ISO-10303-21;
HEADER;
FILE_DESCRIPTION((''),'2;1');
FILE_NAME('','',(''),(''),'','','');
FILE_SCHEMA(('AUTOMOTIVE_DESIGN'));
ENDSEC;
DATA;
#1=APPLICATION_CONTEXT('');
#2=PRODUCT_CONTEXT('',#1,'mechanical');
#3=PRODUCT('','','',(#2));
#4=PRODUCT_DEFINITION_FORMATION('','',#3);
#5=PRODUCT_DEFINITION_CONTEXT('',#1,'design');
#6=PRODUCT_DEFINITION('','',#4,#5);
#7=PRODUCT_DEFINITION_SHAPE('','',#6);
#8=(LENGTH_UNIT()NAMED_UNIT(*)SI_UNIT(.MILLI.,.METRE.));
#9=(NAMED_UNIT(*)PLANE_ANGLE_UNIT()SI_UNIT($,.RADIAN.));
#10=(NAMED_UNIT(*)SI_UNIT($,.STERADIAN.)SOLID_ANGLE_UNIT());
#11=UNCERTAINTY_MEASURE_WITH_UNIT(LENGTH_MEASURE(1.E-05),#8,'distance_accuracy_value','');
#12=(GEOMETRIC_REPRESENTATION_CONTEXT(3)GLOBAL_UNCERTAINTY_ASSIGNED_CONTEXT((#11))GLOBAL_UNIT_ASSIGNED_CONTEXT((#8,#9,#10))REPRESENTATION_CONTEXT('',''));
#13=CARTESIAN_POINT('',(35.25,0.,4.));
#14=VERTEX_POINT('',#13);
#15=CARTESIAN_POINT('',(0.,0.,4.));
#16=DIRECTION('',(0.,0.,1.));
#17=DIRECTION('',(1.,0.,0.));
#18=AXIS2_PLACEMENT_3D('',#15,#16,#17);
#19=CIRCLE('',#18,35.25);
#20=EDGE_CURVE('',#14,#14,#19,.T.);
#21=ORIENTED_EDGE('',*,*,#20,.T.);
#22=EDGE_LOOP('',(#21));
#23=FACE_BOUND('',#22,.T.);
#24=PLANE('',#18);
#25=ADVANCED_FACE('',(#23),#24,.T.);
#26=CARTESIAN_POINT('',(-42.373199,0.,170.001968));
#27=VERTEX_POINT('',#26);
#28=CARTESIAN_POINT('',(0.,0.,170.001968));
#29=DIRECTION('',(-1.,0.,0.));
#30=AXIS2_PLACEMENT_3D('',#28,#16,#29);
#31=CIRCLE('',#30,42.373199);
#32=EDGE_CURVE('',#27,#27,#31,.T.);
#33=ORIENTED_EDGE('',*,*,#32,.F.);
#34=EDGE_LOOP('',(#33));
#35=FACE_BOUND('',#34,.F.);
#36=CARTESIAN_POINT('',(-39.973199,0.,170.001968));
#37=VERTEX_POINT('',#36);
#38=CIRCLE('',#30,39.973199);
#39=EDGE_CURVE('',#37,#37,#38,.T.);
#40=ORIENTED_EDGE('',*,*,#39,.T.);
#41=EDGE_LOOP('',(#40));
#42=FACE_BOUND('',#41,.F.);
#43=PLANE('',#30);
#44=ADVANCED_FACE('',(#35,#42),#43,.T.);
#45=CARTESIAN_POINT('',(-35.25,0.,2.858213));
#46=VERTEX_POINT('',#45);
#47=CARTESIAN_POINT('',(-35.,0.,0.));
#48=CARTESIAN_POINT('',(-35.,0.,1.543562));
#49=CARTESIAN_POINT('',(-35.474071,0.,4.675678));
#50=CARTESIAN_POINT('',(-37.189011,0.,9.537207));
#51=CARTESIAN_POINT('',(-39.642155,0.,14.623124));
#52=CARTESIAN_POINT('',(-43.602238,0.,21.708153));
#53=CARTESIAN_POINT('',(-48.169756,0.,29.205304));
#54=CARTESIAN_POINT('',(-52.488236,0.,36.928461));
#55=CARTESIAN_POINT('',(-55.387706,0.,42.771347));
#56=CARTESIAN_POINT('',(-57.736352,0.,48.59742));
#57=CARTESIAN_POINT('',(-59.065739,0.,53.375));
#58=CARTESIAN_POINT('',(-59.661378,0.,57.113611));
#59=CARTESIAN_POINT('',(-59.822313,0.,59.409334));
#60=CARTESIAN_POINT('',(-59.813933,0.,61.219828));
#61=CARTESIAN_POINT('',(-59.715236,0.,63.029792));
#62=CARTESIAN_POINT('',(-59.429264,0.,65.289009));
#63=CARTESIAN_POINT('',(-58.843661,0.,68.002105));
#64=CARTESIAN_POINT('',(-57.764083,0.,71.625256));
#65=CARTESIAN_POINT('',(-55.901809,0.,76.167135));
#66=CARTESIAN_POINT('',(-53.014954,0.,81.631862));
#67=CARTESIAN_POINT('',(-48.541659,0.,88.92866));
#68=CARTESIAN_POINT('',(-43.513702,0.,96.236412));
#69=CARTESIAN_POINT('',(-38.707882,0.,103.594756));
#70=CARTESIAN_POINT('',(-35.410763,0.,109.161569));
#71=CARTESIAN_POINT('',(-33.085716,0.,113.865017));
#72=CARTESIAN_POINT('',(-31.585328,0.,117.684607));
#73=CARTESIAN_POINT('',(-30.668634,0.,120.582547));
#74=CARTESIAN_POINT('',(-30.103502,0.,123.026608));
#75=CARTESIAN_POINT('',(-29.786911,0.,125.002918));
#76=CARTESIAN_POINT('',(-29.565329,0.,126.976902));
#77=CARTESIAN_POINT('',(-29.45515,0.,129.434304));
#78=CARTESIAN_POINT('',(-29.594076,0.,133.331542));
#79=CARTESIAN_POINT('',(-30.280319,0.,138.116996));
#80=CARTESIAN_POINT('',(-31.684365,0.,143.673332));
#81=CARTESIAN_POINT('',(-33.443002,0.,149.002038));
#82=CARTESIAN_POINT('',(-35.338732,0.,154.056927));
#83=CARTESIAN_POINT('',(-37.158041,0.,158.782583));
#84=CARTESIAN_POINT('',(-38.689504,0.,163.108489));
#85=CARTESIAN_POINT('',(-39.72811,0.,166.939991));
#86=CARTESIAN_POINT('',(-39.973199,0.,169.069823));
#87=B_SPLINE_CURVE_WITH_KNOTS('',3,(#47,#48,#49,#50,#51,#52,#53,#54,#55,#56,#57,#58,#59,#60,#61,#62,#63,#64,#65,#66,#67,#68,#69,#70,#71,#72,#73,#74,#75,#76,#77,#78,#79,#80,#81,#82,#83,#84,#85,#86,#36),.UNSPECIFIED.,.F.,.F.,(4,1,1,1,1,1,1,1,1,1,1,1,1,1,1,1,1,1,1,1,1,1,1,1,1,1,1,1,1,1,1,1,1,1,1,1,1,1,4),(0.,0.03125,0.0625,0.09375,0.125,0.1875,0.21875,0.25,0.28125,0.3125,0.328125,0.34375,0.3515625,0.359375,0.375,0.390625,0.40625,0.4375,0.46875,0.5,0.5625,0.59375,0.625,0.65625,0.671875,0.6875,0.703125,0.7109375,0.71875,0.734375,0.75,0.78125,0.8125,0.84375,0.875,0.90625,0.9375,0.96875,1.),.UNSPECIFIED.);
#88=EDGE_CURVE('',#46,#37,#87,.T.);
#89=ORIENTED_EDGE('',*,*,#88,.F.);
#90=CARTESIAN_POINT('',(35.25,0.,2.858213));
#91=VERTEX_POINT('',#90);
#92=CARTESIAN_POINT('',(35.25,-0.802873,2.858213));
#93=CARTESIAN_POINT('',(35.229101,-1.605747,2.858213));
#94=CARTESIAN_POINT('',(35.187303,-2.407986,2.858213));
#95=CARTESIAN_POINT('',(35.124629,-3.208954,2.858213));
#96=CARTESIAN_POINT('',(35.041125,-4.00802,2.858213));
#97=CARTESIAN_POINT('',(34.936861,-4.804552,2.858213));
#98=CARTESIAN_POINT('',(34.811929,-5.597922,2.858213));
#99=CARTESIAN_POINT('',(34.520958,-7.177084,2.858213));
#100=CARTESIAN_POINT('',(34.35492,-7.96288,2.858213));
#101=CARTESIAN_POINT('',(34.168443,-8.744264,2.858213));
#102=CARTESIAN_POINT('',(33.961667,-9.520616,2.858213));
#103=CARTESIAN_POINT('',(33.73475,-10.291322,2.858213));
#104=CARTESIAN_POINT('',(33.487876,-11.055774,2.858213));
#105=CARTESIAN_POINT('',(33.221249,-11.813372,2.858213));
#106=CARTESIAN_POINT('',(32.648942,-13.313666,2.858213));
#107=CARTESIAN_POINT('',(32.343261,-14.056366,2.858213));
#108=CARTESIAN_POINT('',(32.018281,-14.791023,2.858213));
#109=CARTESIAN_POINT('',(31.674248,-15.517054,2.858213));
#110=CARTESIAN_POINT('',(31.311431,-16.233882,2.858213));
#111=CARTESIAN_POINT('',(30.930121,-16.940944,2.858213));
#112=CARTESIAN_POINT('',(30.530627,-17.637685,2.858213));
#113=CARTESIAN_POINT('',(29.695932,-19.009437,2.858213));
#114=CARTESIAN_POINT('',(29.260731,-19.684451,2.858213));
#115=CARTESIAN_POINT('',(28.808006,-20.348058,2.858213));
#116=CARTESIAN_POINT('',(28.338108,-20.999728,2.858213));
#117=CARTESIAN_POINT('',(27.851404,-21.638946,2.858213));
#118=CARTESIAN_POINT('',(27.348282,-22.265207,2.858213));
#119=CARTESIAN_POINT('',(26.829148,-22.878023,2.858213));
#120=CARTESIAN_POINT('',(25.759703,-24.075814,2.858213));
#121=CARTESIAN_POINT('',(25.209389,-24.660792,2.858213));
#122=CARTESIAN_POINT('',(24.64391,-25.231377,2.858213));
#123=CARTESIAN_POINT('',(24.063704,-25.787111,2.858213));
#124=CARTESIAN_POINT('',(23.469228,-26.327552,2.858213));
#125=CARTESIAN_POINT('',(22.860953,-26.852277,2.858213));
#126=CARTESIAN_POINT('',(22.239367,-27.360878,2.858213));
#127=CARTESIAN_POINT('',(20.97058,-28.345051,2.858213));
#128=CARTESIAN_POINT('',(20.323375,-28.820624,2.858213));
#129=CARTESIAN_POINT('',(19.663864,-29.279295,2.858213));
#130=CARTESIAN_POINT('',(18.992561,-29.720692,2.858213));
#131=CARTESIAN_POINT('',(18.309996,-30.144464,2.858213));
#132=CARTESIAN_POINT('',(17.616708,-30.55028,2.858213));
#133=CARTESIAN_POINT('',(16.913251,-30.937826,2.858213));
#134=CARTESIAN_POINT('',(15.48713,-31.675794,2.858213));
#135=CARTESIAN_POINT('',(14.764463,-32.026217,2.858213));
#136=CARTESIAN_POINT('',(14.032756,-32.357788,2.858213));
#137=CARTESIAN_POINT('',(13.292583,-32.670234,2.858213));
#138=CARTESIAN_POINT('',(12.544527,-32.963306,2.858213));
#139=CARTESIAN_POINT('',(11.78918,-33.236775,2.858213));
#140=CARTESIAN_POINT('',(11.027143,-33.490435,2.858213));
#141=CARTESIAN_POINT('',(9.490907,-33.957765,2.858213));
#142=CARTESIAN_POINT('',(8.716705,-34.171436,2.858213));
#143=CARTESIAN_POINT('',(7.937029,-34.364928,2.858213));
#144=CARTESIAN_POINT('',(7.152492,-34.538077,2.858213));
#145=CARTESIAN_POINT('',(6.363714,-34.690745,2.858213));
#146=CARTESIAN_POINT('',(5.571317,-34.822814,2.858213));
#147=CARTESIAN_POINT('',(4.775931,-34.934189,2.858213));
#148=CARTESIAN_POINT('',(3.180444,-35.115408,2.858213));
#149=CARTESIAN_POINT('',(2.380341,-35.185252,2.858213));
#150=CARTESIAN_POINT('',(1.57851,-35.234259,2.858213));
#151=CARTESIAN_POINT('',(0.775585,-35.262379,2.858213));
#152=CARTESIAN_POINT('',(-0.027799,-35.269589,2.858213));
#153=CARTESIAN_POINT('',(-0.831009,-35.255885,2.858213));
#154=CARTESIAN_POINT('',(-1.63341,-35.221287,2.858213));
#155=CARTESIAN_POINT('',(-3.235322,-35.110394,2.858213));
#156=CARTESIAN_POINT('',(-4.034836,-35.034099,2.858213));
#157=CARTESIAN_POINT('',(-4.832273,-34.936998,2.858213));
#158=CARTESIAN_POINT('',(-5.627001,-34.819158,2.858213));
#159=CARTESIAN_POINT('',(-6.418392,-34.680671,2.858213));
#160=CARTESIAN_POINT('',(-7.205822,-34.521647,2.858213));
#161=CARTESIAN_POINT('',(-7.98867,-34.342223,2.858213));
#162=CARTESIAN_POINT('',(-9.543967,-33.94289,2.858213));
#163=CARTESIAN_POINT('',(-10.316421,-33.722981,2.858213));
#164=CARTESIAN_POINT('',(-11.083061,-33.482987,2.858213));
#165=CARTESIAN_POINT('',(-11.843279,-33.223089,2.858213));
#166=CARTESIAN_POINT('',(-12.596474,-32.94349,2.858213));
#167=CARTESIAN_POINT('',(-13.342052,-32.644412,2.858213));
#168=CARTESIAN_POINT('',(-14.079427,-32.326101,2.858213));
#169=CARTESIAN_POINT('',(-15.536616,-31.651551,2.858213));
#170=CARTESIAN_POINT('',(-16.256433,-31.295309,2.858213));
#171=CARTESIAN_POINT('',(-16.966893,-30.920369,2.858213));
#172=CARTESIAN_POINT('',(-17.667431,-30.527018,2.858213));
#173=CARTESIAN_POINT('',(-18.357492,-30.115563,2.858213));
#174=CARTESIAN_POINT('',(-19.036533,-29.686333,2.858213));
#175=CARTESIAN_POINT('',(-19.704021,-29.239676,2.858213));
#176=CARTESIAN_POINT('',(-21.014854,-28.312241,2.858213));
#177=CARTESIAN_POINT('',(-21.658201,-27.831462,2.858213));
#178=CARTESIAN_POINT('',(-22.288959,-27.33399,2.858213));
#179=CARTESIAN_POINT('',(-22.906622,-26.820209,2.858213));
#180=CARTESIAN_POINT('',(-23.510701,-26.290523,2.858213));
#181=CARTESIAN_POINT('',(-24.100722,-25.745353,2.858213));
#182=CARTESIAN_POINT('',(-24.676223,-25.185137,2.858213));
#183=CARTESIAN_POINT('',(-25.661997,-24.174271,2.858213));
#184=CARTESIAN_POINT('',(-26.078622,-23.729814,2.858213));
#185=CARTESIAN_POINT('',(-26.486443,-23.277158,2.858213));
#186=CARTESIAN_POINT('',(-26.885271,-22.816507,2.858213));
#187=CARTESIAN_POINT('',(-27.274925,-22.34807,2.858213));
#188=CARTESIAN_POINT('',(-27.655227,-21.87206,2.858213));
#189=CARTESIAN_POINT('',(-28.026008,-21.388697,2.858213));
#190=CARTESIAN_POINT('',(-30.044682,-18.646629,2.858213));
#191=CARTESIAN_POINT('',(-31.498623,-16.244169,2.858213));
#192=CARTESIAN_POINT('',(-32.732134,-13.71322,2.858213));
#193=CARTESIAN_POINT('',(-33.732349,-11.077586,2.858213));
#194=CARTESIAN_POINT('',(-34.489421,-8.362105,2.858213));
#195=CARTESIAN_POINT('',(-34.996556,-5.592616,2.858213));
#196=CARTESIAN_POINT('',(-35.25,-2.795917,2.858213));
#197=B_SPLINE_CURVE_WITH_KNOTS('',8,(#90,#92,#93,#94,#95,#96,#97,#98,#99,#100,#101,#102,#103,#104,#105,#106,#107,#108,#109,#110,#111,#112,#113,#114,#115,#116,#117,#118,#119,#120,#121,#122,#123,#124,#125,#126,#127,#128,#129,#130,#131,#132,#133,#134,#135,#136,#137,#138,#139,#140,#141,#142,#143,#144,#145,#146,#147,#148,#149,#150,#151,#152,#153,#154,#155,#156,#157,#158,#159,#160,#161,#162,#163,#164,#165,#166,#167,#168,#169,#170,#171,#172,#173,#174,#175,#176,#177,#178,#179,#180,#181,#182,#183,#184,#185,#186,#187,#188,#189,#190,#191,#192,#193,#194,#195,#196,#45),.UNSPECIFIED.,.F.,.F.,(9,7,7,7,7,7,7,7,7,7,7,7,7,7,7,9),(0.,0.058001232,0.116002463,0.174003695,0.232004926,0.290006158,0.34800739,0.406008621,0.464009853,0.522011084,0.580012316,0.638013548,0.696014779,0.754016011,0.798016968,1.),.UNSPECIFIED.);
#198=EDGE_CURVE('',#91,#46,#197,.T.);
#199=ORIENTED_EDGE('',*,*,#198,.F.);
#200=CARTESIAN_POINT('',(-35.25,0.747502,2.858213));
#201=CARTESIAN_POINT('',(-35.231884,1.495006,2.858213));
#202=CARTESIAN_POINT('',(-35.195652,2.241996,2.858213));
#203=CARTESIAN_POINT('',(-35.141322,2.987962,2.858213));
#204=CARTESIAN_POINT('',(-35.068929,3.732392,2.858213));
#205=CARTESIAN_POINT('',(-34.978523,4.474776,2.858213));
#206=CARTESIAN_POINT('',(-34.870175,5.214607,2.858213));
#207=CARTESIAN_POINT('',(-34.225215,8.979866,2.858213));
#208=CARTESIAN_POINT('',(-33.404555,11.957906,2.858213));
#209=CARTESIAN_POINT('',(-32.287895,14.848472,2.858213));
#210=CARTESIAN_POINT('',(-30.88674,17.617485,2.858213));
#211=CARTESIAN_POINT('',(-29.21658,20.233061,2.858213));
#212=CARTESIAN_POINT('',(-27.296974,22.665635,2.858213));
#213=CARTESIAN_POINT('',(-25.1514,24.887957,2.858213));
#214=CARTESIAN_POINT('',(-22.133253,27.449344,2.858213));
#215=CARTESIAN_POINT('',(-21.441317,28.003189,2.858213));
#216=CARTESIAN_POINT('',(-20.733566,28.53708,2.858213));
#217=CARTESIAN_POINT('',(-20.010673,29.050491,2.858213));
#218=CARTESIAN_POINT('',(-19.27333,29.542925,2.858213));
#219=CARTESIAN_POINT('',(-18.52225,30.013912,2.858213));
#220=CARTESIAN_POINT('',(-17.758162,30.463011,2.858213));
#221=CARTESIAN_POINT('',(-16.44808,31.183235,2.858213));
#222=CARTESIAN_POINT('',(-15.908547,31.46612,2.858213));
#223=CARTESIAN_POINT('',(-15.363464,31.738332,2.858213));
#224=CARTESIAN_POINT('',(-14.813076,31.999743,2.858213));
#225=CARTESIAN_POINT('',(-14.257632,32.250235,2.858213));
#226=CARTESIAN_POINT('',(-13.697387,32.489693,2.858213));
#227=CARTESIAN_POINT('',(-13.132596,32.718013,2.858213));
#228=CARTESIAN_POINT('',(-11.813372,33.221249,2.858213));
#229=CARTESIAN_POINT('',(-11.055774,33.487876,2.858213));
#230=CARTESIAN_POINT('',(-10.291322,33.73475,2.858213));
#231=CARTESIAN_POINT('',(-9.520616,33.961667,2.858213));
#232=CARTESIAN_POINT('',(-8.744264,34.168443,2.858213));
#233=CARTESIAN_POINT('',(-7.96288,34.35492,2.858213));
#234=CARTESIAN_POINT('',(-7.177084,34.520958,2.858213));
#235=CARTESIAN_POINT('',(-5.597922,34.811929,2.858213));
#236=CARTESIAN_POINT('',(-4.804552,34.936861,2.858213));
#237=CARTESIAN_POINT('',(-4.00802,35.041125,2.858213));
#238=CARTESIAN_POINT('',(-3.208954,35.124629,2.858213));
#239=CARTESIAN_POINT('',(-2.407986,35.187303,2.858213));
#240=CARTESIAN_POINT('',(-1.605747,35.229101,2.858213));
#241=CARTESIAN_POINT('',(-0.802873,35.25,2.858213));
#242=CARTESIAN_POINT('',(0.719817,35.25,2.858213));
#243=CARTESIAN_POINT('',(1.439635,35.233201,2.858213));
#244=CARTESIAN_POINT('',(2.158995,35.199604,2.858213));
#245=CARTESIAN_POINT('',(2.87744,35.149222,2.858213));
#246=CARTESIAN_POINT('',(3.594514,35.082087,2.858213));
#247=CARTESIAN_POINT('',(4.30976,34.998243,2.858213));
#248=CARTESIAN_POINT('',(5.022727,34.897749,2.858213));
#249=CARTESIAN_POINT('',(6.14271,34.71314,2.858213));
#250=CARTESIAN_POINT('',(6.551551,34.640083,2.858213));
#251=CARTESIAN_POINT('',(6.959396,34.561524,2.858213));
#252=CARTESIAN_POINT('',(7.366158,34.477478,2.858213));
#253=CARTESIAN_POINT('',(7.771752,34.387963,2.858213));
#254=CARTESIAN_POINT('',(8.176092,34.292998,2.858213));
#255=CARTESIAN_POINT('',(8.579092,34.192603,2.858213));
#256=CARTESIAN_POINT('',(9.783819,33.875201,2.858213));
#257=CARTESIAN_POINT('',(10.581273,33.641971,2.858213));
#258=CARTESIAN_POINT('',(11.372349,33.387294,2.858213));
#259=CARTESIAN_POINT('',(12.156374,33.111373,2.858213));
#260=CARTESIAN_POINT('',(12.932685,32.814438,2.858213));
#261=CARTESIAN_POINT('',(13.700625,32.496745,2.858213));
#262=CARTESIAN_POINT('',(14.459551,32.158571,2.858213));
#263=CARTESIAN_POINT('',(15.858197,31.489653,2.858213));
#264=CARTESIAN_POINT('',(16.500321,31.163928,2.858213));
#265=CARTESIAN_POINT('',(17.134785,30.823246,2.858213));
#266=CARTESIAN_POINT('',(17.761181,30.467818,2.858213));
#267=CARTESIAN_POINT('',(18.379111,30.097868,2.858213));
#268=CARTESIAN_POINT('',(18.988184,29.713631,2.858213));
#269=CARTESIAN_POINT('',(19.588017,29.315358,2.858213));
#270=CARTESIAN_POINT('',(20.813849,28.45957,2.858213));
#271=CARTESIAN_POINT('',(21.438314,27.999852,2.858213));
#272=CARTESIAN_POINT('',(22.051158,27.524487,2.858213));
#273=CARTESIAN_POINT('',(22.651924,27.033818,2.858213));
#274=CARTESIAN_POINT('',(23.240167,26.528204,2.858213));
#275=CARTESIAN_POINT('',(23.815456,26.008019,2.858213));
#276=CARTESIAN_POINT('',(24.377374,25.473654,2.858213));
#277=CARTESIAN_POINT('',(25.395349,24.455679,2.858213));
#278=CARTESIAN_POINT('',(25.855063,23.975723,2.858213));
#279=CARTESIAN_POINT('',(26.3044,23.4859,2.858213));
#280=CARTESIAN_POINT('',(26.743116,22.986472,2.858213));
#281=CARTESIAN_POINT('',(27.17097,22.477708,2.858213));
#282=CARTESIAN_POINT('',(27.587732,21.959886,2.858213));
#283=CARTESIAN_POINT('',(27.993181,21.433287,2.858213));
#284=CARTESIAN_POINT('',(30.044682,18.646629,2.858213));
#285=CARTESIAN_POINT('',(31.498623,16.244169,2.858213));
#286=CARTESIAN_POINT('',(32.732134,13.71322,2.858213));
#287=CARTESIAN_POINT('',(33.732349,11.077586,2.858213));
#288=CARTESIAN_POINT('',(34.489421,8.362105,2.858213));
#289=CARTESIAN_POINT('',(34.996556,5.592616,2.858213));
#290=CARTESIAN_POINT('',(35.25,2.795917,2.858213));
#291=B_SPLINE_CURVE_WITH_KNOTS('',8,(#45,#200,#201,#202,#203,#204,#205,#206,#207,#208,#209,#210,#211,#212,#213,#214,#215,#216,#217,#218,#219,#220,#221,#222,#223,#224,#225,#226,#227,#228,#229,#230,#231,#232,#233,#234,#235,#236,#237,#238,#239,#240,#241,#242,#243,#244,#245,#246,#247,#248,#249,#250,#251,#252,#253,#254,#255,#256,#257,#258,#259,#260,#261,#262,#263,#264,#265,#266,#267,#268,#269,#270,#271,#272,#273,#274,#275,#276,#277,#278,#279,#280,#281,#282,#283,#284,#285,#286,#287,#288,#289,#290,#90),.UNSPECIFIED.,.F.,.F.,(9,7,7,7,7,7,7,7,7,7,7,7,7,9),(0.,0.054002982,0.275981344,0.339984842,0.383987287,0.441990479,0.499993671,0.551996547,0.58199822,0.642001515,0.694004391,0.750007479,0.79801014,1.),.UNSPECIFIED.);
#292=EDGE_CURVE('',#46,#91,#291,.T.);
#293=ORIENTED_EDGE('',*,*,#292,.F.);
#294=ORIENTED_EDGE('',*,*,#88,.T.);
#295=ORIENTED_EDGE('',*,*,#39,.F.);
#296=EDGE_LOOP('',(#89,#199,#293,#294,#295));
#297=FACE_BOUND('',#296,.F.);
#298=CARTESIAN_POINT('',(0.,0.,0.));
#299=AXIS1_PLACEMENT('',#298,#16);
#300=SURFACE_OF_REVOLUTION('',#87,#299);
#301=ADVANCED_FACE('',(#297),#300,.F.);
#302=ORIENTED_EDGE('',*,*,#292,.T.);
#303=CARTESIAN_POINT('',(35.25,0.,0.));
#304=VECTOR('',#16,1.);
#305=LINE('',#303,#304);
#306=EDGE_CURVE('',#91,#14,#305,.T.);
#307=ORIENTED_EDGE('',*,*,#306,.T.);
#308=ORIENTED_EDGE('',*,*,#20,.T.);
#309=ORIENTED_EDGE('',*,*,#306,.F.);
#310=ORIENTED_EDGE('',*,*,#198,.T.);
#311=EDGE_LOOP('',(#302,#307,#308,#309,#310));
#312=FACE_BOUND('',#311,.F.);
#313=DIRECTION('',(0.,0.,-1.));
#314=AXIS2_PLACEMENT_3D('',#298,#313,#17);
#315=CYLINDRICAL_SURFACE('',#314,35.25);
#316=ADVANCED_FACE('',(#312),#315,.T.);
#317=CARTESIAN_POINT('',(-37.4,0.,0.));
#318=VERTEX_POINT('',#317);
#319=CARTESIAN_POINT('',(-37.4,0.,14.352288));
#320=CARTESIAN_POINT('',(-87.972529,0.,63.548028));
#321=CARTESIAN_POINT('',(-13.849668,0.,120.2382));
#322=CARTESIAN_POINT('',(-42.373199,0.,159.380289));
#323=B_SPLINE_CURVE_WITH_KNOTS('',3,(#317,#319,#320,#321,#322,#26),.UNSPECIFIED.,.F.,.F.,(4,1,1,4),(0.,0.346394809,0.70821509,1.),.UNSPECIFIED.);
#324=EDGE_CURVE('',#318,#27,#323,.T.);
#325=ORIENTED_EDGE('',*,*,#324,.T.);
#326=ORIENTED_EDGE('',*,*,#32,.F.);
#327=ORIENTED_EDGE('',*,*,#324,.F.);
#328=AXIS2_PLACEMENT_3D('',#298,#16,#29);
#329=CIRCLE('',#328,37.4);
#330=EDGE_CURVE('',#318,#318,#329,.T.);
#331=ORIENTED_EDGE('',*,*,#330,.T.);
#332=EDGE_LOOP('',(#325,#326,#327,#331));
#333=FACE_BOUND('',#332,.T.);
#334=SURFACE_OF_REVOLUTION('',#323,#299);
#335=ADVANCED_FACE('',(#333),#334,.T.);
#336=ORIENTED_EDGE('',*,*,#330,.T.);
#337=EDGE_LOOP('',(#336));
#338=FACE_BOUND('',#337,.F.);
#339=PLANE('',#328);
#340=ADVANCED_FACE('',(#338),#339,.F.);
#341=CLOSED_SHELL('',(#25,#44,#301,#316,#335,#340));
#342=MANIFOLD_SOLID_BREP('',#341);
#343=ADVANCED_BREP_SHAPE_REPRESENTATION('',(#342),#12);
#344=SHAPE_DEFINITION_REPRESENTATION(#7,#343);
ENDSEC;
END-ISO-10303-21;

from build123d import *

# Parameters (mm, degrees)
F0_R     = 35.25
F3_DEPTH = 4


# Not quite as in the source:
# - the dataset's text gives a spline's control points without its knots; the knots are read off the source's solid


with BuildPart() as f2:
    # F1 (on Front) → F2 (revolve)
    with BuildSketch(Plane.XZ):
        with BuildLine():
            add(Edge.make_bspline(
                [(-37.4, 0), (-37.4, 14.3522878615), (-87.9725287664, 63.5480280182), (-13.8496681212, 120.2382004241), (-42.3731994979, 159.3802885315), (-42.3731994979, 170.001968361)],
                knots=[0, 0, 0, 0, 0.346394809, 0.7082150898, 1, 1, 1, 1], degree=3))
            Line((-37.4, 0), (-35, 0))
            add(Edge.make_bspline(
                [(-35, 0), (-35, 1.5435615345), (-35.4740709756, 4.6756778265), (-37.1890110114, 9.5372073563), (-39.6421549787, 14.623124194), (-43.6022381632, 21.7081526024), (-48.1697564388, 29.205303647), (-52.4882364896, 36.9284610403), (-55.3877063596, 42.7713468132), (-57.7363520925, 48.5974204314), (-59.0657393891, 53.3749997943), (-59.6613776132, 57.1136107845), (-59.8223125946, 59.4093339667), (-59.8139327523, 61.2198276538), (-59.7152357681, 63.0297922371), (-59.4292640546, 65.2890090559), (-58.8436606367, 68.0021049421), (-57.7640826947, 71.6252558323), (-55.9018093753, 76.1671352682), (-53.0149538831, 81.6318615101), (-48.5416585108, 88.9286602891), (-43.5137019467, 96.2364115739), (-38.7078820067, 103.5947555365), (-35.4107630111, 109.161569174), (-33.0857159356, 113.8650166067), (-31.5853282653, 117.6846071433), (-30.6686341443, 120.5825471763), (-30.1035019872, 123.0266081935), (-29.7869108035, 125.0029181307), (-29.5653294094, 126.9769023682), (-29.4551501007, 129.4343040764), (-29.5940760544, 133.3315419977), (-30.2803192124, 138.1169963171), (-31.6843645256, 143.6733322177), (-33.4430018443, 149.0020378424), (-35.3387323109, 154.056926589), (-37.15804108, 158.7825833299), (-38.6895035826, 163.1084894977), (-39.7281102079, 166.9399913556), (-39.9731994979, 169.0698227633), (-39.9731994979, 170.001968361)],
                knots=[0, 0, 0, 0, 0.03125, 0.0625, 0.09375, 0.125, 0.1875, 0.21875, 0.25, 0.28125, 0.3125, 0.328125, 0.34375, 0.3515625, 0.359375, 0.375, 0.390625, 0.40625, 0.4375, 0.46875, 0.5, 0.5625, 0.59375, 0.625, 0.65625, 0.671875, 0.6875, 0.703125, 0.7109375, 0.71875, 0.734375, 0.75, 0.78125, 0.8125, 0.84375, 0.875, 0.90625, 0.9375, 0.96875, 1, 1, 1, 1], degree=3))
            Line((-39.9731994979, 170.001968361), (-42.3731994979, 170.001968361))
        make_face()
    revolve(axis=Axis((0, 0, 0), (0, 0, 1)))

    # F0 (on Top) → F3 (join)
    with BuildSketch(Plane.XY):
        Circle(F0_R)
    extrude(amount=F3_DEPTH)


solid = f2.part
